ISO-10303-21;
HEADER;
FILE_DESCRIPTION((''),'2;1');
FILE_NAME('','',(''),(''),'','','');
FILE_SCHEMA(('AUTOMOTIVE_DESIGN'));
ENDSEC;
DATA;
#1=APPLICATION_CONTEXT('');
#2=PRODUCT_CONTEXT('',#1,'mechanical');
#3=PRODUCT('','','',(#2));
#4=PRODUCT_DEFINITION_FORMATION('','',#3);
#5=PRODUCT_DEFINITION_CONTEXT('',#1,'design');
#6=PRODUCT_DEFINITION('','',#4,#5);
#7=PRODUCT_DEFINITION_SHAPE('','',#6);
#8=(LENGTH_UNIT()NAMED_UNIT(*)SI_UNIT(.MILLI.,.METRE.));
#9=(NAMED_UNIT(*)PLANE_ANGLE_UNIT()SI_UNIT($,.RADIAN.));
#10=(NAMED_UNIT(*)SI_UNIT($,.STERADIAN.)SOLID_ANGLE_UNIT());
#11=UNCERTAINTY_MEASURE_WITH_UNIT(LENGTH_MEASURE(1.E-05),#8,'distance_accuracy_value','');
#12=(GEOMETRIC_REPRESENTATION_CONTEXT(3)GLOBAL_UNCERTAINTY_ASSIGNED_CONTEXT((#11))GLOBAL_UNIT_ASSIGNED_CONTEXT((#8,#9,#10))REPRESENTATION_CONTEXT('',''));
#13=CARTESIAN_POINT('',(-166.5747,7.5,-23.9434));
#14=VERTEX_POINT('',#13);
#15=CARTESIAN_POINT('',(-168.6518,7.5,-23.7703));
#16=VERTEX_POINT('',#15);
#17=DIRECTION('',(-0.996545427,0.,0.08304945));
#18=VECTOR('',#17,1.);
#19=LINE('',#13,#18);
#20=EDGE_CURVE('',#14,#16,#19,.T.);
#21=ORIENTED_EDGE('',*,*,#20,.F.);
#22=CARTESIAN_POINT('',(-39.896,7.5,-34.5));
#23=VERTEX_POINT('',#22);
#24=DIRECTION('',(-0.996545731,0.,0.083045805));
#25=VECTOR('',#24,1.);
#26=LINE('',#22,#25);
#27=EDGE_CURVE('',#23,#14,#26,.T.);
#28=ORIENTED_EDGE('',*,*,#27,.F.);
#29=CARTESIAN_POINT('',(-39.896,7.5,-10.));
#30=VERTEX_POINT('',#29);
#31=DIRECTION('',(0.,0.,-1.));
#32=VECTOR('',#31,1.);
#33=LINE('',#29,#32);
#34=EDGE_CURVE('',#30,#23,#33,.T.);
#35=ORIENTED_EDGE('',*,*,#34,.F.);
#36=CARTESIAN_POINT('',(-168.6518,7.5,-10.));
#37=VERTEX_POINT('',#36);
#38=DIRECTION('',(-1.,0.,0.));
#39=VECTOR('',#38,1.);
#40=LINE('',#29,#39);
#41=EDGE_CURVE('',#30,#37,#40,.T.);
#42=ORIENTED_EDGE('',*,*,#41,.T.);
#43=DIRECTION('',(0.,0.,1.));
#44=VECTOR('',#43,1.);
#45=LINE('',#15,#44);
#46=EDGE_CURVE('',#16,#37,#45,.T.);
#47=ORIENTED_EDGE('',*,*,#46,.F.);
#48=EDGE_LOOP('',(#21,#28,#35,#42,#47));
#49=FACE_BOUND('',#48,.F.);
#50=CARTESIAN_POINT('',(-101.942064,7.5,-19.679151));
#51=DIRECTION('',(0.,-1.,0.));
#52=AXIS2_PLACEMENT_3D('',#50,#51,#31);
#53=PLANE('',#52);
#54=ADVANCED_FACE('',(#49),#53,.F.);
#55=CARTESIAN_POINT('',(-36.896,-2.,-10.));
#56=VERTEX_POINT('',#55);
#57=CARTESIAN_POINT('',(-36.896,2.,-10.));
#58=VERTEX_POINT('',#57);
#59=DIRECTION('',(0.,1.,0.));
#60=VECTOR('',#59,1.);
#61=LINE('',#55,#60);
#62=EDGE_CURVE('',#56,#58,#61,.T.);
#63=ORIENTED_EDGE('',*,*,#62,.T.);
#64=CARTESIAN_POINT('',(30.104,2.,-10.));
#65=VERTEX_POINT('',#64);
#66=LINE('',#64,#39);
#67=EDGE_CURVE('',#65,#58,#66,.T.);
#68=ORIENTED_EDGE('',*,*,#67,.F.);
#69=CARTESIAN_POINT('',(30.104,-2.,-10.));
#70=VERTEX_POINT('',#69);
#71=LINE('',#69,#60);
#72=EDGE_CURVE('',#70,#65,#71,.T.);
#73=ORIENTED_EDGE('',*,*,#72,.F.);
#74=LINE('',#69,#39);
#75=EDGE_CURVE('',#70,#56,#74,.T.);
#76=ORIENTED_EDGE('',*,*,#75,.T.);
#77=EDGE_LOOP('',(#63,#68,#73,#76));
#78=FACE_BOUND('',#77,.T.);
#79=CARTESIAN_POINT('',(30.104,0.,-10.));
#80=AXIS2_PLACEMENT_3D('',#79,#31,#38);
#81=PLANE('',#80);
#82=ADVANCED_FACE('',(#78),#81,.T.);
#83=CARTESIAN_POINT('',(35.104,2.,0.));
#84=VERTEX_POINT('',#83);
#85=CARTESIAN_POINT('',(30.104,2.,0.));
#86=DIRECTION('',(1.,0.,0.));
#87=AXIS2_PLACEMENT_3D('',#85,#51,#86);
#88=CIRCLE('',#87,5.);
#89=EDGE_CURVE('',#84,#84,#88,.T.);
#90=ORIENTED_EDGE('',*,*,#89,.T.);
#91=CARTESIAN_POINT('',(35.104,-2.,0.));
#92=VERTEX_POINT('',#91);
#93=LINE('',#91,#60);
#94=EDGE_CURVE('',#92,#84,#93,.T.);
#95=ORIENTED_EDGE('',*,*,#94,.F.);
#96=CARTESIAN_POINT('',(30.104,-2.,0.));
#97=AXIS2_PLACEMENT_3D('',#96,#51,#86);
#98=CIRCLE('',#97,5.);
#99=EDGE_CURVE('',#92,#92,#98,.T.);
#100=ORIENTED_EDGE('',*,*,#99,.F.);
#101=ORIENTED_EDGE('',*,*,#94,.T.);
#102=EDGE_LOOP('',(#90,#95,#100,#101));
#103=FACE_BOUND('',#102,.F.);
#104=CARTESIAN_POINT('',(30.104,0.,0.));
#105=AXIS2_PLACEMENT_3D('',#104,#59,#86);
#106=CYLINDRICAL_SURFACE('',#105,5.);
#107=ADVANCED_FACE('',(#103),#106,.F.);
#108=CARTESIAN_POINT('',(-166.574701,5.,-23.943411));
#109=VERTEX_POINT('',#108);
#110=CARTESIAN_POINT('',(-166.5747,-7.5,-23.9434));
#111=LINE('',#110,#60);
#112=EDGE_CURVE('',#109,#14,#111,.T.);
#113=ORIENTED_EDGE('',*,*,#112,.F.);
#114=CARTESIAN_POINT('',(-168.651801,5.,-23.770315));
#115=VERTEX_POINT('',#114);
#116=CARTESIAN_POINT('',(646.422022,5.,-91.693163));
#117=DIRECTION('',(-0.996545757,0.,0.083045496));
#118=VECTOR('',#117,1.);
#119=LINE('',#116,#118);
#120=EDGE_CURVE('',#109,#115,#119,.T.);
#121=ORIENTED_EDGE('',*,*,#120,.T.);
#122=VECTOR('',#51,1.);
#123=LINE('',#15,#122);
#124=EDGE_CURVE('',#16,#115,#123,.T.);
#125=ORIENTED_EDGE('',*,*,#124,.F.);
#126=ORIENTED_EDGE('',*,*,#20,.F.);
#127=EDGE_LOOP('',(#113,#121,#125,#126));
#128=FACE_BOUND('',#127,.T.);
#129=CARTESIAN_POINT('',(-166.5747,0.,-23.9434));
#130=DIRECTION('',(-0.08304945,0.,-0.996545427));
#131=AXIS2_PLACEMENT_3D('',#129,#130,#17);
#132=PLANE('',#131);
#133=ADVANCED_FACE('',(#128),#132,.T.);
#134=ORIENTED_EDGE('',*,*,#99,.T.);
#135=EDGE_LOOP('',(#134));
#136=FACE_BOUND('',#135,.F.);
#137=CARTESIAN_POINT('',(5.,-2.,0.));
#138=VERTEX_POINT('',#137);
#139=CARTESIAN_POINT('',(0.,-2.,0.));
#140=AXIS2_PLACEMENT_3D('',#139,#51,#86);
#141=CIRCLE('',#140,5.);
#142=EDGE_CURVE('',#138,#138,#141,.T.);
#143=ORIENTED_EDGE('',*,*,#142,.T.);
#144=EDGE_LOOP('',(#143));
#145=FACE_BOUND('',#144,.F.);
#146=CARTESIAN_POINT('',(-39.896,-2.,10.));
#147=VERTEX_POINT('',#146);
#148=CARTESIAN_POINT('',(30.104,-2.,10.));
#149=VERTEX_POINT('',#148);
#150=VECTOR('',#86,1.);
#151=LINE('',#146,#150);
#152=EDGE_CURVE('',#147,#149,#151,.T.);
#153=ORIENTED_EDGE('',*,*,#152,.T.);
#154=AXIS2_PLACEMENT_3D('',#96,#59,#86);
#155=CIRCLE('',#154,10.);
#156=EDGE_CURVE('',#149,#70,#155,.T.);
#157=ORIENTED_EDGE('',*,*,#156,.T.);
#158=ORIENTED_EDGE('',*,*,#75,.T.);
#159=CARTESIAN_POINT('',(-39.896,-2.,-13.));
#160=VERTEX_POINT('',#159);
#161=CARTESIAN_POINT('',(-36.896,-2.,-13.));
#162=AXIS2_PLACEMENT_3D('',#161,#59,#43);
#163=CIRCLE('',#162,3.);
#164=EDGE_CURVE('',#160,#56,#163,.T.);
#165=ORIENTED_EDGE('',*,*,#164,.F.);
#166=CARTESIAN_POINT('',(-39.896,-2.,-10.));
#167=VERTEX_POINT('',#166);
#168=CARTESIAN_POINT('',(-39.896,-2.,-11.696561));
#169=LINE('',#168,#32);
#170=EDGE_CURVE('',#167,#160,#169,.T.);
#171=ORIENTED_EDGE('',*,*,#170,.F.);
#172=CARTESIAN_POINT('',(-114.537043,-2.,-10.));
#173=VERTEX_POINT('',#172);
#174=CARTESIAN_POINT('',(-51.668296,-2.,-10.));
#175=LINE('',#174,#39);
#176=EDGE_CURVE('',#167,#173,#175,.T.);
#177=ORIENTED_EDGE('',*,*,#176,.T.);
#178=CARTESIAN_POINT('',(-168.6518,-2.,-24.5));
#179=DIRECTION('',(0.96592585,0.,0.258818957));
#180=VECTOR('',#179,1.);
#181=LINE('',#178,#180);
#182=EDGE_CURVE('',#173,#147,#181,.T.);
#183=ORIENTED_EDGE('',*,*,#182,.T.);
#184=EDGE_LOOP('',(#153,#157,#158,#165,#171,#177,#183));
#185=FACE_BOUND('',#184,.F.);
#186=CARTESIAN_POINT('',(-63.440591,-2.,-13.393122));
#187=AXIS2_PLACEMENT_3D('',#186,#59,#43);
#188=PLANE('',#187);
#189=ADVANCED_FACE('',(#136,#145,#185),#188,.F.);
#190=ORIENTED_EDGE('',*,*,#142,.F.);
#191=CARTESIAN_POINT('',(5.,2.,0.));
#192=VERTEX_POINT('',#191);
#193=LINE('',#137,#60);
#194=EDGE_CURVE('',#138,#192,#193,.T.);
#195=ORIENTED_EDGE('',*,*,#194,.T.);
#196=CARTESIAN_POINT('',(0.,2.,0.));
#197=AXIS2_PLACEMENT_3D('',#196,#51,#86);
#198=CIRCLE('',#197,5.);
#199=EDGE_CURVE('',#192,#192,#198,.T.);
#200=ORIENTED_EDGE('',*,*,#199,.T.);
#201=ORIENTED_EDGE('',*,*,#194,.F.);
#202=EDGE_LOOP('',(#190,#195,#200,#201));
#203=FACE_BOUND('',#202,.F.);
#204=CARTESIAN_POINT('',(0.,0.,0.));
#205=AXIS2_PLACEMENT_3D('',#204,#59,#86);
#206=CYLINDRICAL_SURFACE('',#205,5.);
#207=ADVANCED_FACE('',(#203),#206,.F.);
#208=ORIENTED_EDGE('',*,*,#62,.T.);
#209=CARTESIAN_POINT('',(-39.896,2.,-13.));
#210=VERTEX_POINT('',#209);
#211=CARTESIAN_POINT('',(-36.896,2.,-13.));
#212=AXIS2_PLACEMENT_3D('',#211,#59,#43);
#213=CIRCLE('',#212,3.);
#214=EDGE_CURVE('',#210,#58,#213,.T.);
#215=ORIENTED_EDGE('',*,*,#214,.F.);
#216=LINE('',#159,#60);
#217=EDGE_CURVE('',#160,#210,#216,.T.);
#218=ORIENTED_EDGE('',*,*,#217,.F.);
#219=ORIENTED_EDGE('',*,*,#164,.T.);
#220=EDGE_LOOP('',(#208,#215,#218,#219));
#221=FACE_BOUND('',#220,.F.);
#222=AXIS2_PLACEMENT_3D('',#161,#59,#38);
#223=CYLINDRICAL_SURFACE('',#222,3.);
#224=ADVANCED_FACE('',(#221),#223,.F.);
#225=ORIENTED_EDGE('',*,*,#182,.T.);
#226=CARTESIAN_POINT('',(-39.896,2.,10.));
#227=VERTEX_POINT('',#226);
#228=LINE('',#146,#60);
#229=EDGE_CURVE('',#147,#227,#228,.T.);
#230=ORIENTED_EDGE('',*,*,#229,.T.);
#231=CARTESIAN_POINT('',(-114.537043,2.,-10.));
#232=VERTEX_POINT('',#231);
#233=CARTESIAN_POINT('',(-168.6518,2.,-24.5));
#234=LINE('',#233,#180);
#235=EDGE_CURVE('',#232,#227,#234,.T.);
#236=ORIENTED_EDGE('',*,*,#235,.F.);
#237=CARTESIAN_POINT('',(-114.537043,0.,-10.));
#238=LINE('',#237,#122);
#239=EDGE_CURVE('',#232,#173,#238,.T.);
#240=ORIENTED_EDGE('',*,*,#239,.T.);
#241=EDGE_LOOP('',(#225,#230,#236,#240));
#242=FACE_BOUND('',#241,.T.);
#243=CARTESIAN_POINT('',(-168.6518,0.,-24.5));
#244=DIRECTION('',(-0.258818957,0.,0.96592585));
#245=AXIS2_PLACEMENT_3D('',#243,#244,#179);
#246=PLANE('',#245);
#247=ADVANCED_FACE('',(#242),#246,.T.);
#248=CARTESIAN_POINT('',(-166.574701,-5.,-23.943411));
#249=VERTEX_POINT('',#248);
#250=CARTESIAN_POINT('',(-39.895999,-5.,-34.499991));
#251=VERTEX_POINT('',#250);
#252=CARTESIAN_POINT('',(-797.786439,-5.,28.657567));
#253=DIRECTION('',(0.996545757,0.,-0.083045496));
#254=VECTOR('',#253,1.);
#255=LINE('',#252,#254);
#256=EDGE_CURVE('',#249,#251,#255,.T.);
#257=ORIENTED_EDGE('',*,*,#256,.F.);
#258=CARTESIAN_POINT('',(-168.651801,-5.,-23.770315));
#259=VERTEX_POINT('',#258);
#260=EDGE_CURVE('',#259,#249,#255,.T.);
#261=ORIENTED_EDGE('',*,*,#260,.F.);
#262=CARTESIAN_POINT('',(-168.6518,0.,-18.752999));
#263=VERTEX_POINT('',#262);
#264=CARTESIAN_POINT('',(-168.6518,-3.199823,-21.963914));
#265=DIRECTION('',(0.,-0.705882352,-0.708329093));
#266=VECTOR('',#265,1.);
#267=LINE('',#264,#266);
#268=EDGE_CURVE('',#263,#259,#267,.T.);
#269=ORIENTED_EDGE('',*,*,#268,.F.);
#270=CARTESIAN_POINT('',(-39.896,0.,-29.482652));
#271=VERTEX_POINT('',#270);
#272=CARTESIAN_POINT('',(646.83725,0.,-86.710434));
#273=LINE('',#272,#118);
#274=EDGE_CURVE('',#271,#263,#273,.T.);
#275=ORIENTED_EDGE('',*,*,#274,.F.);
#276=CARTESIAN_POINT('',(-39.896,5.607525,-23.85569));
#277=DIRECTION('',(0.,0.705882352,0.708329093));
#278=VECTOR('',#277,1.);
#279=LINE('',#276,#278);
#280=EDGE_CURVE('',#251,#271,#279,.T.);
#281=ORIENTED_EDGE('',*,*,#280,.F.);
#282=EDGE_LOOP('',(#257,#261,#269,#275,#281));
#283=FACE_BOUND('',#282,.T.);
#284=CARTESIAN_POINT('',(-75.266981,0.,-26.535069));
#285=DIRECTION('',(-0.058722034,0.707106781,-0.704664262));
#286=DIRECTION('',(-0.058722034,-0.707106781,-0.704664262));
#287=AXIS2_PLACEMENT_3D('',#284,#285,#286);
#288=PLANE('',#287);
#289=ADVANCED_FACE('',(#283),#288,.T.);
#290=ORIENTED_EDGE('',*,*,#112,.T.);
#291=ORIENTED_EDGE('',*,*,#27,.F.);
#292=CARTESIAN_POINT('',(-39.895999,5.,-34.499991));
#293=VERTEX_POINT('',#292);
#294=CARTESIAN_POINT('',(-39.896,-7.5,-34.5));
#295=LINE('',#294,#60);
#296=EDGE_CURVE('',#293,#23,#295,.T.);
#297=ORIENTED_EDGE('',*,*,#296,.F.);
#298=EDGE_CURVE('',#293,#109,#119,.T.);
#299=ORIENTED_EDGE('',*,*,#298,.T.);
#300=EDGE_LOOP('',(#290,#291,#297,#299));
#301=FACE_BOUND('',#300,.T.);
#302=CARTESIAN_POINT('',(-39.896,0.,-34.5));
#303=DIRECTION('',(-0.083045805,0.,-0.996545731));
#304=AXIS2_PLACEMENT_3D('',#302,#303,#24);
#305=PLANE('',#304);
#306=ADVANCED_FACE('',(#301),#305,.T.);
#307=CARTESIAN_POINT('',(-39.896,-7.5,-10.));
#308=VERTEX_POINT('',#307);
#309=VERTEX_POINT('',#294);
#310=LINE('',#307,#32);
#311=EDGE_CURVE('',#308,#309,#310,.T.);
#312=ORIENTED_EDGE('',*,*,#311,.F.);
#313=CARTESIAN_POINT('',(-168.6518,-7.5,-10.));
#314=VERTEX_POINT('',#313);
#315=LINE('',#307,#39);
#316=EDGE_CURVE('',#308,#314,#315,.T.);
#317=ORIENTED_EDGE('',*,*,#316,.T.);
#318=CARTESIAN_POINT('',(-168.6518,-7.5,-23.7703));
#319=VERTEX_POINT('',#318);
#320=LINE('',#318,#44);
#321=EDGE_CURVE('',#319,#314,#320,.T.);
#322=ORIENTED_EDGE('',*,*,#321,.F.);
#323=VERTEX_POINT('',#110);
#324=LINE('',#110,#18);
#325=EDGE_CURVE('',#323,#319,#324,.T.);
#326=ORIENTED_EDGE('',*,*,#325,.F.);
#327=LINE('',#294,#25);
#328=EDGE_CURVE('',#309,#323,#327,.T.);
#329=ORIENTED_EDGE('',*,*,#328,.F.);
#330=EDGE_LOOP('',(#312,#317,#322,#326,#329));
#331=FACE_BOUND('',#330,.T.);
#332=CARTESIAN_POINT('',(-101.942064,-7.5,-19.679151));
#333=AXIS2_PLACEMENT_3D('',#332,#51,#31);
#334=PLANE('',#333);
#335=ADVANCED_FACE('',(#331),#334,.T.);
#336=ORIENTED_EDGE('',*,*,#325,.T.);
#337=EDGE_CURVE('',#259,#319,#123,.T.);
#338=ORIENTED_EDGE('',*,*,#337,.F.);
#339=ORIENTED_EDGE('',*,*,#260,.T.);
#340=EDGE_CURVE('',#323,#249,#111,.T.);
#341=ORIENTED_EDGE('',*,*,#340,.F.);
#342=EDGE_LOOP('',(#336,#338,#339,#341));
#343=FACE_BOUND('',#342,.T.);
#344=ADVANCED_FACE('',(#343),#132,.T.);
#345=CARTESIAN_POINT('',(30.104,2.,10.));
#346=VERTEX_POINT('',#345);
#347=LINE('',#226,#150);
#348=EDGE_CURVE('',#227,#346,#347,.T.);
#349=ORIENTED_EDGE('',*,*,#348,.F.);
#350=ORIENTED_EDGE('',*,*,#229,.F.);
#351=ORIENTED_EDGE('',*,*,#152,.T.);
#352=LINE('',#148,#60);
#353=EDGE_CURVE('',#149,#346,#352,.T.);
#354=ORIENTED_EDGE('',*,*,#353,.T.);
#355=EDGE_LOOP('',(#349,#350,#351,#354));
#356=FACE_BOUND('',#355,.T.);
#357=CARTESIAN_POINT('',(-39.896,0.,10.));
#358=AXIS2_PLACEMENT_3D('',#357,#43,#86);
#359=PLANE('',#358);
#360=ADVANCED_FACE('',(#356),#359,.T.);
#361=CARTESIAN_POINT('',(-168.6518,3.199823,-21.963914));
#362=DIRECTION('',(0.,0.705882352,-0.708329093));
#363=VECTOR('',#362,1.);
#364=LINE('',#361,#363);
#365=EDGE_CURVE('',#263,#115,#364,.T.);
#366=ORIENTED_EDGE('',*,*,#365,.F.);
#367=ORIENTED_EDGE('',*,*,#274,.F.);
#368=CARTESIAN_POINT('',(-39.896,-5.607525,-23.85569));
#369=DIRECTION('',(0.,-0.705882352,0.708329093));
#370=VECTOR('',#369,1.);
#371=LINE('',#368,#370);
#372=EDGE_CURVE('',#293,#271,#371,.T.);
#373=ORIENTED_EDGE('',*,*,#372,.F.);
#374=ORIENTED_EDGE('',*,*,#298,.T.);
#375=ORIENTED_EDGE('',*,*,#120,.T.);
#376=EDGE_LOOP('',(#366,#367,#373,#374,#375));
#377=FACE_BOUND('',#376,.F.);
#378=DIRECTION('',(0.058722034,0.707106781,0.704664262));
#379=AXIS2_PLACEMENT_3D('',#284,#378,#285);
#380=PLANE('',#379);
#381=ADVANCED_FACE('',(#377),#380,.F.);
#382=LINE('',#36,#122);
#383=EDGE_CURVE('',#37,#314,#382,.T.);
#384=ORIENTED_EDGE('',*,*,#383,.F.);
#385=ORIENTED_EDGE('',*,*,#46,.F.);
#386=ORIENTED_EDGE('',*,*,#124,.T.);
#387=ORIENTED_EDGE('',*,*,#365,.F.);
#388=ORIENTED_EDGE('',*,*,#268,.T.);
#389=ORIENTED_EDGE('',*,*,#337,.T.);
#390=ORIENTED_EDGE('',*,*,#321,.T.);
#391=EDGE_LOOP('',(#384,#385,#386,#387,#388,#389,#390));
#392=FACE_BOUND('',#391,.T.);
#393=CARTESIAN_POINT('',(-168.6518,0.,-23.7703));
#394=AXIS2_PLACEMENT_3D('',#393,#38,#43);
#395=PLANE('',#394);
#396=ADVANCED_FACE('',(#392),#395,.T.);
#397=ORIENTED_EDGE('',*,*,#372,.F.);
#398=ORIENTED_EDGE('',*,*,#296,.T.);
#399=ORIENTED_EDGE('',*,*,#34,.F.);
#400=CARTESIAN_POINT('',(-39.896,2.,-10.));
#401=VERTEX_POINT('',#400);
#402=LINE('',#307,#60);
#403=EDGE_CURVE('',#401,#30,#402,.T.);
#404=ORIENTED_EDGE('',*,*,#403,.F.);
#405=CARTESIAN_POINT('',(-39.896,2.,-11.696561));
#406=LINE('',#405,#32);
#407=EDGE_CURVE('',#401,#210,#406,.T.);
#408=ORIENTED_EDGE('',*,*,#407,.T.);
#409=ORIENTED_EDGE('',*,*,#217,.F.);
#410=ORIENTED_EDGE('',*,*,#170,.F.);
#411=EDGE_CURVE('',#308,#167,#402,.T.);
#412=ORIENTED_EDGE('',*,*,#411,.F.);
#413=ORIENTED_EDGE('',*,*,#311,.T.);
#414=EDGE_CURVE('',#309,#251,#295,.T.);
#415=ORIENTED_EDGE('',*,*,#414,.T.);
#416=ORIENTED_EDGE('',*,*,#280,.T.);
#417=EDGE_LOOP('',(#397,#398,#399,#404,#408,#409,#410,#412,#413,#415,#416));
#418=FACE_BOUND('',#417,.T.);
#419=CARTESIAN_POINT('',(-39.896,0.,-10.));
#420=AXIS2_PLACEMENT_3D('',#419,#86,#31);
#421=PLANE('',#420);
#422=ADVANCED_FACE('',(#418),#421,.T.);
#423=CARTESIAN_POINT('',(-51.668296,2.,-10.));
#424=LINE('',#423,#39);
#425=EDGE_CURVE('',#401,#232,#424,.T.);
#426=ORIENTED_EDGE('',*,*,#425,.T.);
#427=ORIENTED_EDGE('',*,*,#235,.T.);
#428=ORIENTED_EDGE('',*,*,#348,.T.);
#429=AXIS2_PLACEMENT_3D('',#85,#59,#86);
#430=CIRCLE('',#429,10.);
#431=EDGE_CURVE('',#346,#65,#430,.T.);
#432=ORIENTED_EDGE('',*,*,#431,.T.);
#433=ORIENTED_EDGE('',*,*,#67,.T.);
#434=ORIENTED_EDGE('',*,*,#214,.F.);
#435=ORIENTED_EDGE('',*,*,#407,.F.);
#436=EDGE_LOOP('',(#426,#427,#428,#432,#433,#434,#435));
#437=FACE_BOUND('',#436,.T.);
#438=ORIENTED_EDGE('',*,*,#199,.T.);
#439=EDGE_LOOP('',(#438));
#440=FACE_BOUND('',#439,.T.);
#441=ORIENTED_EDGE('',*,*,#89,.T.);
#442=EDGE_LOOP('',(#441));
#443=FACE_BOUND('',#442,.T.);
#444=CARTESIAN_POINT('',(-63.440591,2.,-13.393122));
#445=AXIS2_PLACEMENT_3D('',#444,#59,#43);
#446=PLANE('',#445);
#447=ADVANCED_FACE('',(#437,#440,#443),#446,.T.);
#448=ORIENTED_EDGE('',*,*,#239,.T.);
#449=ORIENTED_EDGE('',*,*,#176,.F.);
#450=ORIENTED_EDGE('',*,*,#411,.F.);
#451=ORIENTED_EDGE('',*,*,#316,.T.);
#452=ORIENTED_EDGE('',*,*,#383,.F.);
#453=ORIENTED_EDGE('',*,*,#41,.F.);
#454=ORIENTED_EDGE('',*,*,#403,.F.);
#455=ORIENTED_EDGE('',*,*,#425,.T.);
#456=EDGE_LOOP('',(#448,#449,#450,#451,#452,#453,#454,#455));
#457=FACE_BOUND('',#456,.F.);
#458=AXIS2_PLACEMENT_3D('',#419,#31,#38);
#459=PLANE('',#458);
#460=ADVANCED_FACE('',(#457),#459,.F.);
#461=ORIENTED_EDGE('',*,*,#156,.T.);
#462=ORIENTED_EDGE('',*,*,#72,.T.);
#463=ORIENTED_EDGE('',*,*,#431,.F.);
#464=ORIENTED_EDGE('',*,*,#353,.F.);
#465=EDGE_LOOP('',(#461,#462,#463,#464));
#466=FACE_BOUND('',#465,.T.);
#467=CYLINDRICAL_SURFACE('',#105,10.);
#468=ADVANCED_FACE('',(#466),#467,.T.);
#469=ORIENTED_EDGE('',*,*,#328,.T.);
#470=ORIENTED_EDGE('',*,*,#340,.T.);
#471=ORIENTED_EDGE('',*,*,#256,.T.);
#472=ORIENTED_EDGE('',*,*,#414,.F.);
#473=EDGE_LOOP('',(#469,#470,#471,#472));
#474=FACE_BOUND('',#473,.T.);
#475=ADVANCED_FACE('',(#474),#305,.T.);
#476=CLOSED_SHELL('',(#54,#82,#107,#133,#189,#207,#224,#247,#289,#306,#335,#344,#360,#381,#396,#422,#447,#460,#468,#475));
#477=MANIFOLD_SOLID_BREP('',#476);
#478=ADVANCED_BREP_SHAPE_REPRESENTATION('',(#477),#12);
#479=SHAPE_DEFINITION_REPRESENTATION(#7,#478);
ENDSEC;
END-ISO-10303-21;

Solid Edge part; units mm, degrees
sketch "Sketch1" plane through (0, 0, 0) normal (0, -1, 0) x (1, 0, 0)
  line L0 (-168.6518, -24.5) -> (-39.896, 10)
  line L1 (-39.896, 10) -> (30.104, 10)
  arc A0 (30.104, 10) -> (30.104, -10) centre (30.104, 0) cw
  line L2 (30.104, -10) -> (-39.896, -10)
  line L3 (-39.896, -10) -> (-39.896, -34.5)
  line L4 (-39.896, -34.5) -> (-168.6518, -34.5)
  line L5 (-168.6518, -34.5) -> (-168.6518, -24.5)
  circle A1 centre (30.104, 0) radius 5
  circle A2 centre (0, 0) radius 5
  dimension "D1" = 10
  dimension "D2" = 30.104
  dimension "D3" = 10
  dimension "D4" = 70
  dimension "D5" = 24.5
  dimension "D6" = 10
  dimension "D7" = 70
extrude "Protrusion1" add sketch "Sketch1" along normal mid plane 4
sketch "Sketch2" plane through (-34.896, 0, -4.3782) normal (0, -1, 0) x (1, 0, 0)
  line L0 (-5, -5.6218) -> (-133.7558, -5.6218)
  line L1 (-133.7558, -19.3921) -> (-133.7558, -5.6218)
  line L2 (-131.6787, -19.5652) -> (-133.7558, -19.3921)
  line L3 (-5, -30.1218) -> (-131.6787, -19.5652)
  line L4 (-5, -5.6218) -> (-5, -30.1218)
extrude "Protrusion2" add sketch "Sketch2" along normal mid plane 15
fillet "Redondeo_2" radius 3 1 edges at (-39.896, 0, -10)
sketch "Sketch3" plane through (-74.896, -7.5, -22.0833) normal (0.9965458, 0, -0.0830455) x (0, 1, 0)
  line L0 (7.5, -4.4672) -> (2.5, -9.4672)
  line L1 (2.5, -9.4672) -> (12.5, -9.4672)
  line L2 (7.5, -4.4672) -> (12.5, -9.4672)
  dimension "D1" = 5
extrude "Cutout1" cut sketch "Sketch3" along normal through all and the other way through all
sketch "Sketch4" plane through (-104.2739, -2, -29.2217) normal (0, -1, 0) x (1, 0, 0)
  line L0 (-64.3779, 5.4514) -> (64.3779, -5.2783)
  line L1 (64.3779, -5.2783) -> (-64.3779, -5.2783)
  line L2 (-64.3779, -5.2783) -> (-64.3779, 5.4514)
extrude "Cutout2" cut sketch "Sketch4" along normal through all and the other way through all
